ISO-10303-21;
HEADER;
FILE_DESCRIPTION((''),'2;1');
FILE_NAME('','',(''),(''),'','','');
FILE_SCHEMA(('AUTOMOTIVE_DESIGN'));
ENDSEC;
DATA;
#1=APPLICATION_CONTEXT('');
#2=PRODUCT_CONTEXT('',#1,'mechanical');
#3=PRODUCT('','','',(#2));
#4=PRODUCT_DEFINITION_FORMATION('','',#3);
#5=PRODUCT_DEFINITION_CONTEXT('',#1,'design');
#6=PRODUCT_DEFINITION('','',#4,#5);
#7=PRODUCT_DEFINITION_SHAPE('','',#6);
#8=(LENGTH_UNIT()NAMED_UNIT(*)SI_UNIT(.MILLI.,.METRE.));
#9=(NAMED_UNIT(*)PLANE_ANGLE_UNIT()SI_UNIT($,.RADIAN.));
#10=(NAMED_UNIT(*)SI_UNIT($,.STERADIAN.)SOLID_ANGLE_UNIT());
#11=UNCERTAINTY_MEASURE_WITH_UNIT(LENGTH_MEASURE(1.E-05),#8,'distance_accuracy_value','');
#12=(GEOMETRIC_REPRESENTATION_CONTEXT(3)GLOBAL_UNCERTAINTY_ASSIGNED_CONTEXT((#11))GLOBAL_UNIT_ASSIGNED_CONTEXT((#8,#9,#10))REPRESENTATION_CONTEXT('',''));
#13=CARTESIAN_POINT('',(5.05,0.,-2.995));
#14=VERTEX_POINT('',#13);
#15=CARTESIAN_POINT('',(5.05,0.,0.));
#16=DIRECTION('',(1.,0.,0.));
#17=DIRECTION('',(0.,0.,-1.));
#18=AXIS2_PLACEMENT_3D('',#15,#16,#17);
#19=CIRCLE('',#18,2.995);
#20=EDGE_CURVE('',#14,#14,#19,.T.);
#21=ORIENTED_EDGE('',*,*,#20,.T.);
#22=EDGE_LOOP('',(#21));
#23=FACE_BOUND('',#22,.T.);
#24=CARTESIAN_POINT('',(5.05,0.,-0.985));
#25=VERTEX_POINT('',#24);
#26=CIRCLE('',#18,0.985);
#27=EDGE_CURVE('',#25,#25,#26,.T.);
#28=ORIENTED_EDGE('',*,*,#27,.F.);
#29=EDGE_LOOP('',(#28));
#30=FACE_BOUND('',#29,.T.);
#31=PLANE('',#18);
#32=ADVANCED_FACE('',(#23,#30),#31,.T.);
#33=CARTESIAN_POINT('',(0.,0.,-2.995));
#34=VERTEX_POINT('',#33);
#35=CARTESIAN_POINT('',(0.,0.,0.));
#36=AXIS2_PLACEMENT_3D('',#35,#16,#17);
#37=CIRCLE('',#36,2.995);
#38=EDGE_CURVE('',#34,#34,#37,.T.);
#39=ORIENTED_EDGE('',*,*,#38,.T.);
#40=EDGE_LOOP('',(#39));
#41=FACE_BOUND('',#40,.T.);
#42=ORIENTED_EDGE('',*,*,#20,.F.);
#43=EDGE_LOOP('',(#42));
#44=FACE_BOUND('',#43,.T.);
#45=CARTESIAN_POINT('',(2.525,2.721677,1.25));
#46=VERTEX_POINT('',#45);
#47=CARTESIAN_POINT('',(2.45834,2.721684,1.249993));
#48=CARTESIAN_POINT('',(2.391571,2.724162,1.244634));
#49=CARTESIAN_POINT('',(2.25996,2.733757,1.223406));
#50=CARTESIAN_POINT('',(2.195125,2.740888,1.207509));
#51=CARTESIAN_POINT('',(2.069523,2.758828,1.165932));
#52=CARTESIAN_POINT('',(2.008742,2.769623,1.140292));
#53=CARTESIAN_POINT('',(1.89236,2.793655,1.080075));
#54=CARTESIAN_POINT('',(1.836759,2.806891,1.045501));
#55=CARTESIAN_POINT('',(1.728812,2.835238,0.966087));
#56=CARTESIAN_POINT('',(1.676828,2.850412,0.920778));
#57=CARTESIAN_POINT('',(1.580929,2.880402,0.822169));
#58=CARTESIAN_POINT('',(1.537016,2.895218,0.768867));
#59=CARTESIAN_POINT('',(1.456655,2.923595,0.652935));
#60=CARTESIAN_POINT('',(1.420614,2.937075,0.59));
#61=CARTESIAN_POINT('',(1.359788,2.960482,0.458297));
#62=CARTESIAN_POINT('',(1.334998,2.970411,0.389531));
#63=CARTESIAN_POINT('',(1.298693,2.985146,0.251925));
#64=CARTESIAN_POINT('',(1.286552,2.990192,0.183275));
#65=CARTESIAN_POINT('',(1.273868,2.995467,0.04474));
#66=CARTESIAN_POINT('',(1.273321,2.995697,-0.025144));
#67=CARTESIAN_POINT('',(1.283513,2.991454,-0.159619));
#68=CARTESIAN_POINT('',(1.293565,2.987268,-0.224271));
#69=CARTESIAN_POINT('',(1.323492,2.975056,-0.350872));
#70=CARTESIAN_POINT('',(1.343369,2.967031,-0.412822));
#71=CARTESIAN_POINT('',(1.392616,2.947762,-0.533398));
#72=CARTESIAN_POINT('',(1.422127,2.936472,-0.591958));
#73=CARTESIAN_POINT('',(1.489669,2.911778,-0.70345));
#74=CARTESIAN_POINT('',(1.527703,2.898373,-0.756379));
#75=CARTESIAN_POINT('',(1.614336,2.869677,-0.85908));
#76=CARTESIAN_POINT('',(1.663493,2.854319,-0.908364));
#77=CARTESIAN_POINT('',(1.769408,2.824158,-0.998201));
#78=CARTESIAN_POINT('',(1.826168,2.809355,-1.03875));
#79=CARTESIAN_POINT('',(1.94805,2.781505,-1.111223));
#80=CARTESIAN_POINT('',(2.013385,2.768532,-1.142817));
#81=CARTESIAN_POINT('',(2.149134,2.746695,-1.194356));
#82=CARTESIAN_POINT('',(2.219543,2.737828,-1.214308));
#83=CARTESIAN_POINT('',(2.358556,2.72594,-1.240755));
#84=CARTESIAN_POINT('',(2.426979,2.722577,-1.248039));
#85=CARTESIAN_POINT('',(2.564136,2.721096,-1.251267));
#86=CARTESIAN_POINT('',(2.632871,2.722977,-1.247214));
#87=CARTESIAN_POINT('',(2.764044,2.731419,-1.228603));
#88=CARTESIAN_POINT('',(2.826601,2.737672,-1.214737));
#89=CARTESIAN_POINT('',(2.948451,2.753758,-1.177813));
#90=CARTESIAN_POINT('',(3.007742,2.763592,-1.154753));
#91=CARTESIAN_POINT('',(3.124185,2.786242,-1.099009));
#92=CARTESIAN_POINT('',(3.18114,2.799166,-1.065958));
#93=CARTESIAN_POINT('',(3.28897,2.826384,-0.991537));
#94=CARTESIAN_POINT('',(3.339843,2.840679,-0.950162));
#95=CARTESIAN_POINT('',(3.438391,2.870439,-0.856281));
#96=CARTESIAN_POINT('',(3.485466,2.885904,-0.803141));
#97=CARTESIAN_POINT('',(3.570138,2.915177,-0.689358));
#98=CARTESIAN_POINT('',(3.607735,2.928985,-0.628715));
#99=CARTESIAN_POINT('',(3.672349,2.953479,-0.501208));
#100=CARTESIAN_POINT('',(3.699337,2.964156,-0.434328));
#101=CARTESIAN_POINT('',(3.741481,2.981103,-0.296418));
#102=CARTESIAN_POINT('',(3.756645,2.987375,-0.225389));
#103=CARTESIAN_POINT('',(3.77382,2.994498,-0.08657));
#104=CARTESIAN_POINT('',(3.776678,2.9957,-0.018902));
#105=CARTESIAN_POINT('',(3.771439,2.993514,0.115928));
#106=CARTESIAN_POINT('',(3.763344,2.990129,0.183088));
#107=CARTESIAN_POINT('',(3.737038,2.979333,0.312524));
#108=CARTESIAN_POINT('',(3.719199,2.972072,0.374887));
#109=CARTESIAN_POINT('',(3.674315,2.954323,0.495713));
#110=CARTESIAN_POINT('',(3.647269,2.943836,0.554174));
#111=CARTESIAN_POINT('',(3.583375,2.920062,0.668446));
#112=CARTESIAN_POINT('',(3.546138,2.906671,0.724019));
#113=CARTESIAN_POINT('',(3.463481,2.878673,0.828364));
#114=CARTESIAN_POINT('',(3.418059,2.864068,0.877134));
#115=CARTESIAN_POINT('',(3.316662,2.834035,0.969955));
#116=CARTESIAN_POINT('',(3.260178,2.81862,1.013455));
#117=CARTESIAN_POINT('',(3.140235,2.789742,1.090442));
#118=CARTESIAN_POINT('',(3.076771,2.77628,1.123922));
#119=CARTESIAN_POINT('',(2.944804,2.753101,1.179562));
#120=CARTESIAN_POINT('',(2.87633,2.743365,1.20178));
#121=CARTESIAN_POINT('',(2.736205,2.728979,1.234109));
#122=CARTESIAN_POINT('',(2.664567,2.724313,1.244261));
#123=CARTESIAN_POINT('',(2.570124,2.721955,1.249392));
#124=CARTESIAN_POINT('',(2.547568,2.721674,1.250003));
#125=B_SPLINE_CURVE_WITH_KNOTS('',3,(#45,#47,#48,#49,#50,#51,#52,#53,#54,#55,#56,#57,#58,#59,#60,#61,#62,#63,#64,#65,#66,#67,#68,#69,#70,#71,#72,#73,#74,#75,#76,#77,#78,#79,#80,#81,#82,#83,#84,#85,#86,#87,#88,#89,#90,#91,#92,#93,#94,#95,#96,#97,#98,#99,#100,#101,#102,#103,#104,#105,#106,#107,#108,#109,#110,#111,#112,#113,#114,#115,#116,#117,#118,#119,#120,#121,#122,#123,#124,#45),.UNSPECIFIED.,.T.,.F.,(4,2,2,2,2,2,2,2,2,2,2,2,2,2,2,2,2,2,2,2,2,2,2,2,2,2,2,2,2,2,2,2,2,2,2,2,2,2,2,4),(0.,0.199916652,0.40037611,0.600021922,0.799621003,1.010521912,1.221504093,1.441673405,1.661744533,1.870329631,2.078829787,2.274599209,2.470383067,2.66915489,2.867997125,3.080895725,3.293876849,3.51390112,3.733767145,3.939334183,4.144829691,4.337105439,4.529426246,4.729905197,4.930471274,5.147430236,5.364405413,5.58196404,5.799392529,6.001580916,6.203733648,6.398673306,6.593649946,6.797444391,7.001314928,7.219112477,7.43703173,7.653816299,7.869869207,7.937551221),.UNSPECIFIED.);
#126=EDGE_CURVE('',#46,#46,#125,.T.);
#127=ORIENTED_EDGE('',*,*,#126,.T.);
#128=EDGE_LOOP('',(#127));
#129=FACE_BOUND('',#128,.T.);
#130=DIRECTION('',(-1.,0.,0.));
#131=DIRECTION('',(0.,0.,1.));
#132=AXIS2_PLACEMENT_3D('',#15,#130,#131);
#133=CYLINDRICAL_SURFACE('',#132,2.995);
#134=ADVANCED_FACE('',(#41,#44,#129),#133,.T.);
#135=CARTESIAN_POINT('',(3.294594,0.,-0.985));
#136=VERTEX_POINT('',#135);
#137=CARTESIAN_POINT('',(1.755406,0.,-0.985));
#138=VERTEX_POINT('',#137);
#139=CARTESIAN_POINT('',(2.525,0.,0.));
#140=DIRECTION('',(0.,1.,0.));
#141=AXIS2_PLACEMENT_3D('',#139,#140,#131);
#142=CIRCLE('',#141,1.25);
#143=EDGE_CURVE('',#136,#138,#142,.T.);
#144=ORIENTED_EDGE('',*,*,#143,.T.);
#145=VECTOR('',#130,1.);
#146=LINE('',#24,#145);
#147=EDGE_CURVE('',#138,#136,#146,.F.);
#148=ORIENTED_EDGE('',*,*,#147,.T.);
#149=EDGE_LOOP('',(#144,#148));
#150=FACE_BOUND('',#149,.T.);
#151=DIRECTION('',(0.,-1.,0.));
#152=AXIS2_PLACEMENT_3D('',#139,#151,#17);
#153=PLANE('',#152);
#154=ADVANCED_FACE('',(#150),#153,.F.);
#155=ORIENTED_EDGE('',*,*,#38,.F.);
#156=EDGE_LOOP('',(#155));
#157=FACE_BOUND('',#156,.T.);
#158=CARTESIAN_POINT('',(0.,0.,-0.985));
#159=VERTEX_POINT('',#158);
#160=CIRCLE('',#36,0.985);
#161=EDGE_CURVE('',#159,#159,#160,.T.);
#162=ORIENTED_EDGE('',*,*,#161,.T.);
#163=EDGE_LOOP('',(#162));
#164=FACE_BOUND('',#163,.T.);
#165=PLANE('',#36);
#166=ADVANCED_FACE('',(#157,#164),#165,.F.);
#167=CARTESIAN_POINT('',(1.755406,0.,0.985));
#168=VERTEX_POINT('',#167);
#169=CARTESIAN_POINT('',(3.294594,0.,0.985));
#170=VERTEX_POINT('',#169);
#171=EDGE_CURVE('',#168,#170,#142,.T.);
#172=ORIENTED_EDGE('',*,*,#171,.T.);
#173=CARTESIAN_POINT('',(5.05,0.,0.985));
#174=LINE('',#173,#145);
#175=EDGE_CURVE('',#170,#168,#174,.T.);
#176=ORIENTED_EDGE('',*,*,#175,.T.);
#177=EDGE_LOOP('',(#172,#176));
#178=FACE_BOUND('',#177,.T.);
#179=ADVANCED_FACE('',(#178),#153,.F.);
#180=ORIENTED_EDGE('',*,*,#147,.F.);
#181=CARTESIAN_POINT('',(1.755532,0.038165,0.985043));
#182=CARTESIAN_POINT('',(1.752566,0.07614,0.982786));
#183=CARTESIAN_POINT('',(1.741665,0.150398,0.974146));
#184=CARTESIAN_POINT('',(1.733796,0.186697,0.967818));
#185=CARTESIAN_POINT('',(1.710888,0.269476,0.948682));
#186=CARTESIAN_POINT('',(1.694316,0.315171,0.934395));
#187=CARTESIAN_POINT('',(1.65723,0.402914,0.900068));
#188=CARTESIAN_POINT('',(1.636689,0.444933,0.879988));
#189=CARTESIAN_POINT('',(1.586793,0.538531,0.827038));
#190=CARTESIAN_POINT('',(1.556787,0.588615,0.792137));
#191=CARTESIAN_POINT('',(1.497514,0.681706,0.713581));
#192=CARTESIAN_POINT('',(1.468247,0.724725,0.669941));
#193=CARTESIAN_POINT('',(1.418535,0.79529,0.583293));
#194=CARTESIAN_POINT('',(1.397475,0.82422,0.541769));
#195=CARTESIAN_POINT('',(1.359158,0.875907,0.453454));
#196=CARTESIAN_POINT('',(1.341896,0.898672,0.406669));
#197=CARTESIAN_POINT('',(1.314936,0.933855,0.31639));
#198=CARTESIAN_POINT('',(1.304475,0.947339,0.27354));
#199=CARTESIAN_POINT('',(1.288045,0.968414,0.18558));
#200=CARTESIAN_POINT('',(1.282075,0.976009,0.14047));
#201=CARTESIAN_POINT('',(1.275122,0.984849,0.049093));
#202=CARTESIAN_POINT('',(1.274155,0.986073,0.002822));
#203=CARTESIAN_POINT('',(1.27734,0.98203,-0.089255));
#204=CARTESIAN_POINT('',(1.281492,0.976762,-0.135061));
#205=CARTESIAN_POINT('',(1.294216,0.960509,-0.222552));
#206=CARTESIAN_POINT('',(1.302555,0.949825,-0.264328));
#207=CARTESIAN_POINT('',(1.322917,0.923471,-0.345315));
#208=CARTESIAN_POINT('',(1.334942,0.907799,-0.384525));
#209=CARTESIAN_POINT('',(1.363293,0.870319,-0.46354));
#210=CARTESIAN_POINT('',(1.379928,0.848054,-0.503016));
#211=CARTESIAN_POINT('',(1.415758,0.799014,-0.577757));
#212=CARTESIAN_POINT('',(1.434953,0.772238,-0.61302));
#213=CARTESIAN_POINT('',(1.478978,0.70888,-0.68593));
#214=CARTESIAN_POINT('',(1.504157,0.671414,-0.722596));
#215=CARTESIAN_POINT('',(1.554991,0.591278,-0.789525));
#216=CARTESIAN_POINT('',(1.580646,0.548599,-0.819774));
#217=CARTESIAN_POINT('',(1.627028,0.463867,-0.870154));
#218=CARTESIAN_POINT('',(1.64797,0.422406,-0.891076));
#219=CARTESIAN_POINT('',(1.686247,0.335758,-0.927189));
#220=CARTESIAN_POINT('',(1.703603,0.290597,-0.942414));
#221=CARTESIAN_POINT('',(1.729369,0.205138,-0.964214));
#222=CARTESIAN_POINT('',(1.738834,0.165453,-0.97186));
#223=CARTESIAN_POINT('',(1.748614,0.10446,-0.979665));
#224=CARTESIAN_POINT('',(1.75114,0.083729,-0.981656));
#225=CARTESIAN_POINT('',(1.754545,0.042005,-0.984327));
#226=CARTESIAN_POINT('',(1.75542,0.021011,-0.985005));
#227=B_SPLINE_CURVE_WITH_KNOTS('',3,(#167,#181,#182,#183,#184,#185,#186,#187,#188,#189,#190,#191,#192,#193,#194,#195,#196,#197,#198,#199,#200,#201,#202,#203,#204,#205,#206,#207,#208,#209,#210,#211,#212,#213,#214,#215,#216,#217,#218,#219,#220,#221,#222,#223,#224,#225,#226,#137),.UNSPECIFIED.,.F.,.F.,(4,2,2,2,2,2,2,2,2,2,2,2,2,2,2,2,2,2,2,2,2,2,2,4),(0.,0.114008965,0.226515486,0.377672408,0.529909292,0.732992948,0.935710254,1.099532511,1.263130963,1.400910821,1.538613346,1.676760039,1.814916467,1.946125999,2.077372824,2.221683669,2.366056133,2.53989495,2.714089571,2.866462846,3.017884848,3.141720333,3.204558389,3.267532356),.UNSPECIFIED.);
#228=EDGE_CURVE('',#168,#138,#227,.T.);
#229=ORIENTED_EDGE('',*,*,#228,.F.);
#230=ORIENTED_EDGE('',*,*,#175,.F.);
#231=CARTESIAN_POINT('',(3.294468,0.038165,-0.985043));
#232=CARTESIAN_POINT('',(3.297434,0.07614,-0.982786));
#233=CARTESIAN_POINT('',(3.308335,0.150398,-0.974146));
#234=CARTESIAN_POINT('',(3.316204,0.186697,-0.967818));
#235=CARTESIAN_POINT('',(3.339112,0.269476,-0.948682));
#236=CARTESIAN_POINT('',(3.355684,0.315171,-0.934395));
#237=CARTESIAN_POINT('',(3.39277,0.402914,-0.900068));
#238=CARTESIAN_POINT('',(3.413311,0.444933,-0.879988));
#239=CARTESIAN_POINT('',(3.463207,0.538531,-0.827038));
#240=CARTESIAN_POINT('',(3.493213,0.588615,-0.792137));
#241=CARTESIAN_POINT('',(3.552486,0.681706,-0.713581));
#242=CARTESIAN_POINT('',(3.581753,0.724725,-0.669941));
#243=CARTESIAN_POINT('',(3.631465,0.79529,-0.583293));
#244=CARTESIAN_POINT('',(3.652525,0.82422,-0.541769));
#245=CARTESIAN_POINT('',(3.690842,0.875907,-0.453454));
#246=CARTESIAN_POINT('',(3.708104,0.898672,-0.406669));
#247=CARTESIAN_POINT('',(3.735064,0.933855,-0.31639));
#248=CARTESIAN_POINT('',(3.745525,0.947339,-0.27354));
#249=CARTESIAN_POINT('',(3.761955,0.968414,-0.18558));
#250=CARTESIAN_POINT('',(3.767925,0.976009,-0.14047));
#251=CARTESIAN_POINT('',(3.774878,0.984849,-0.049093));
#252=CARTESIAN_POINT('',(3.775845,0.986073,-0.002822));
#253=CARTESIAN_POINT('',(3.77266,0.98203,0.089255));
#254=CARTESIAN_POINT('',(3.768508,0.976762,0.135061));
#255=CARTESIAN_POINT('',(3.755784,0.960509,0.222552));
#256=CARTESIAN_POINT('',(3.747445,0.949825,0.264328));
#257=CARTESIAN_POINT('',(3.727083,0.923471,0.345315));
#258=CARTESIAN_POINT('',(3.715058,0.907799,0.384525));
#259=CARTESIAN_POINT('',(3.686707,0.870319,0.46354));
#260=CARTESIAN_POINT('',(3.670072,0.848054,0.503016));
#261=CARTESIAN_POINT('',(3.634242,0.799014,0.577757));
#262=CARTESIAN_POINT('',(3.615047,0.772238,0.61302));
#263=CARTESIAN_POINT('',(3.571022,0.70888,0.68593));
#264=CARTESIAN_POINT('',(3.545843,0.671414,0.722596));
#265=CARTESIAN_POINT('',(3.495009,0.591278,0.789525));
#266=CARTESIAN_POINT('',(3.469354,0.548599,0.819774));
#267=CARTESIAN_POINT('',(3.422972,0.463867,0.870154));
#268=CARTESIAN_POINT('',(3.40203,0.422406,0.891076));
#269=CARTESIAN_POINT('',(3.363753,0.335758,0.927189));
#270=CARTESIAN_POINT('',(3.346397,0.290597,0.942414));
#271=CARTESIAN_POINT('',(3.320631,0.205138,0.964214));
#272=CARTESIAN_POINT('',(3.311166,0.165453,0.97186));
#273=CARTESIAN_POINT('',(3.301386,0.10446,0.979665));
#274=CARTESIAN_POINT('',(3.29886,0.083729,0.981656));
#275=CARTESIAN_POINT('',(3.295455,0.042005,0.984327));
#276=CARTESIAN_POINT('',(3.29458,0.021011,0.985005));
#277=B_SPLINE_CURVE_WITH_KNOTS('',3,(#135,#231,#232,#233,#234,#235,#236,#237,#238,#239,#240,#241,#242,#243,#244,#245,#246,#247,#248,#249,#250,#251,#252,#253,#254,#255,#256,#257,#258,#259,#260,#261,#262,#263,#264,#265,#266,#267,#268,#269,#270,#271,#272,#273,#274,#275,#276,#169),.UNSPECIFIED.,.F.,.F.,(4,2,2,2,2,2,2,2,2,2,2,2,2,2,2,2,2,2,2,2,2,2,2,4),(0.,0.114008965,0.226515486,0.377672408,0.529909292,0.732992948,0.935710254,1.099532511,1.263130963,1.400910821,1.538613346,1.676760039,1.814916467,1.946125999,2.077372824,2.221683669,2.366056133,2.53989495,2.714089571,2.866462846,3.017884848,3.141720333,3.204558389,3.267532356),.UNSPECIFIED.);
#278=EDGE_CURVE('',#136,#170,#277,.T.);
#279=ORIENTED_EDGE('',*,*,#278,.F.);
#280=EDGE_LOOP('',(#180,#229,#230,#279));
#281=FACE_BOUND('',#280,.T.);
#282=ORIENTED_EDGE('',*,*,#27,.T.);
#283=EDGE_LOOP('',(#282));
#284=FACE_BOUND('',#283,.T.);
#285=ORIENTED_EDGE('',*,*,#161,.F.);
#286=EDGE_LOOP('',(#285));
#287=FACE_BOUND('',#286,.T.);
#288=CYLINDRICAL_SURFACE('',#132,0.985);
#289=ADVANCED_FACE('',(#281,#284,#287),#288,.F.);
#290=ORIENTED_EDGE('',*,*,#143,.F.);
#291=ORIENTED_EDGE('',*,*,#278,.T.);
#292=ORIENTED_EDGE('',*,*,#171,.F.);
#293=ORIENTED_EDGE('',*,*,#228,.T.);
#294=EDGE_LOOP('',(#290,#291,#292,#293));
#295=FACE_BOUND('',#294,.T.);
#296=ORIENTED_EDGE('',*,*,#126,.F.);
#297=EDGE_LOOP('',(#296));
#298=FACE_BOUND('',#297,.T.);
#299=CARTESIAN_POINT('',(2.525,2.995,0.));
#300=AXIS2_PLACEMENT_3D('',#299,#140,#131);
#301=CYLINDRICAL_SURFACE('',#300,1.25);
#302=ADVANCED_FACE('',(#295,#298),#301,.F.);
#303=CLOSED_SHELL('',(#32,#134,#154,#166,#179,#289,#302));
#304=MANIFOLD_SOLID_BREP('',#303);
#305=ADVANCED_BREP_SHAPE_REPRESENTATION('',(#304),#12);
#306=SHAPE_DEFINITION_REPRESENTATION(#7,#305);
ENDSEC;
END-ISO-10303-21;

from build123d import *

# Parameters (mm, degrees)
SCHIZZO1_R                        = 2.995
SCHIZZO1_R_2                      = 0.985
ESTRUSIONE_ESTRUSIONE1_DEPTH      = 5.05
FORO_FILETTATO_M3X0_5_1_OUTLINE_W = 1.25
FORO_FILETTATO_M3X0_5_1_OUTLINE_H = 2.995111585


# Read off the part's stored shape, not the designer's step: Foro filettato M3x0.5-1
with BuildPart() as part:
    # Schizzo1 → Estrusione-Estrusione1 (new body)
    with BuildSketch(Plane(origin=(0, 0, 0), x_dir=(0, 0, -1), z_dir=(1, 0, 0))):
        Circle(SCHIZZO1_R)
        Circle(SCHIZZO1_R_2, mode=Mode.SUBTRACT)
    extrude(amount=ESTRUSIONE_ESTRUSIONE1_DEPTH)

    # Foro filettato M3x0.5-1 outline → Foro filettato M3x0.5-1 (revolve, cut)
    with BuildSketch(Plane(origin=(2.525, 0, 0), x_dir=(1, 0, 0), z_dir=(0, 0, 1))):
        with Locations((0.625, 1.497555793)):
            Rectangle(FORO_FILETTATO_M3X0_5_1_OUTLINE_W, FORO_FILETTATO_M3X0_5_1_OUTLINE_H)
    revolve(axis=Axis((2.525, 0, 0), (0, 1, 0)), mode=Mode.SUBTRACT)


solid = part.part
